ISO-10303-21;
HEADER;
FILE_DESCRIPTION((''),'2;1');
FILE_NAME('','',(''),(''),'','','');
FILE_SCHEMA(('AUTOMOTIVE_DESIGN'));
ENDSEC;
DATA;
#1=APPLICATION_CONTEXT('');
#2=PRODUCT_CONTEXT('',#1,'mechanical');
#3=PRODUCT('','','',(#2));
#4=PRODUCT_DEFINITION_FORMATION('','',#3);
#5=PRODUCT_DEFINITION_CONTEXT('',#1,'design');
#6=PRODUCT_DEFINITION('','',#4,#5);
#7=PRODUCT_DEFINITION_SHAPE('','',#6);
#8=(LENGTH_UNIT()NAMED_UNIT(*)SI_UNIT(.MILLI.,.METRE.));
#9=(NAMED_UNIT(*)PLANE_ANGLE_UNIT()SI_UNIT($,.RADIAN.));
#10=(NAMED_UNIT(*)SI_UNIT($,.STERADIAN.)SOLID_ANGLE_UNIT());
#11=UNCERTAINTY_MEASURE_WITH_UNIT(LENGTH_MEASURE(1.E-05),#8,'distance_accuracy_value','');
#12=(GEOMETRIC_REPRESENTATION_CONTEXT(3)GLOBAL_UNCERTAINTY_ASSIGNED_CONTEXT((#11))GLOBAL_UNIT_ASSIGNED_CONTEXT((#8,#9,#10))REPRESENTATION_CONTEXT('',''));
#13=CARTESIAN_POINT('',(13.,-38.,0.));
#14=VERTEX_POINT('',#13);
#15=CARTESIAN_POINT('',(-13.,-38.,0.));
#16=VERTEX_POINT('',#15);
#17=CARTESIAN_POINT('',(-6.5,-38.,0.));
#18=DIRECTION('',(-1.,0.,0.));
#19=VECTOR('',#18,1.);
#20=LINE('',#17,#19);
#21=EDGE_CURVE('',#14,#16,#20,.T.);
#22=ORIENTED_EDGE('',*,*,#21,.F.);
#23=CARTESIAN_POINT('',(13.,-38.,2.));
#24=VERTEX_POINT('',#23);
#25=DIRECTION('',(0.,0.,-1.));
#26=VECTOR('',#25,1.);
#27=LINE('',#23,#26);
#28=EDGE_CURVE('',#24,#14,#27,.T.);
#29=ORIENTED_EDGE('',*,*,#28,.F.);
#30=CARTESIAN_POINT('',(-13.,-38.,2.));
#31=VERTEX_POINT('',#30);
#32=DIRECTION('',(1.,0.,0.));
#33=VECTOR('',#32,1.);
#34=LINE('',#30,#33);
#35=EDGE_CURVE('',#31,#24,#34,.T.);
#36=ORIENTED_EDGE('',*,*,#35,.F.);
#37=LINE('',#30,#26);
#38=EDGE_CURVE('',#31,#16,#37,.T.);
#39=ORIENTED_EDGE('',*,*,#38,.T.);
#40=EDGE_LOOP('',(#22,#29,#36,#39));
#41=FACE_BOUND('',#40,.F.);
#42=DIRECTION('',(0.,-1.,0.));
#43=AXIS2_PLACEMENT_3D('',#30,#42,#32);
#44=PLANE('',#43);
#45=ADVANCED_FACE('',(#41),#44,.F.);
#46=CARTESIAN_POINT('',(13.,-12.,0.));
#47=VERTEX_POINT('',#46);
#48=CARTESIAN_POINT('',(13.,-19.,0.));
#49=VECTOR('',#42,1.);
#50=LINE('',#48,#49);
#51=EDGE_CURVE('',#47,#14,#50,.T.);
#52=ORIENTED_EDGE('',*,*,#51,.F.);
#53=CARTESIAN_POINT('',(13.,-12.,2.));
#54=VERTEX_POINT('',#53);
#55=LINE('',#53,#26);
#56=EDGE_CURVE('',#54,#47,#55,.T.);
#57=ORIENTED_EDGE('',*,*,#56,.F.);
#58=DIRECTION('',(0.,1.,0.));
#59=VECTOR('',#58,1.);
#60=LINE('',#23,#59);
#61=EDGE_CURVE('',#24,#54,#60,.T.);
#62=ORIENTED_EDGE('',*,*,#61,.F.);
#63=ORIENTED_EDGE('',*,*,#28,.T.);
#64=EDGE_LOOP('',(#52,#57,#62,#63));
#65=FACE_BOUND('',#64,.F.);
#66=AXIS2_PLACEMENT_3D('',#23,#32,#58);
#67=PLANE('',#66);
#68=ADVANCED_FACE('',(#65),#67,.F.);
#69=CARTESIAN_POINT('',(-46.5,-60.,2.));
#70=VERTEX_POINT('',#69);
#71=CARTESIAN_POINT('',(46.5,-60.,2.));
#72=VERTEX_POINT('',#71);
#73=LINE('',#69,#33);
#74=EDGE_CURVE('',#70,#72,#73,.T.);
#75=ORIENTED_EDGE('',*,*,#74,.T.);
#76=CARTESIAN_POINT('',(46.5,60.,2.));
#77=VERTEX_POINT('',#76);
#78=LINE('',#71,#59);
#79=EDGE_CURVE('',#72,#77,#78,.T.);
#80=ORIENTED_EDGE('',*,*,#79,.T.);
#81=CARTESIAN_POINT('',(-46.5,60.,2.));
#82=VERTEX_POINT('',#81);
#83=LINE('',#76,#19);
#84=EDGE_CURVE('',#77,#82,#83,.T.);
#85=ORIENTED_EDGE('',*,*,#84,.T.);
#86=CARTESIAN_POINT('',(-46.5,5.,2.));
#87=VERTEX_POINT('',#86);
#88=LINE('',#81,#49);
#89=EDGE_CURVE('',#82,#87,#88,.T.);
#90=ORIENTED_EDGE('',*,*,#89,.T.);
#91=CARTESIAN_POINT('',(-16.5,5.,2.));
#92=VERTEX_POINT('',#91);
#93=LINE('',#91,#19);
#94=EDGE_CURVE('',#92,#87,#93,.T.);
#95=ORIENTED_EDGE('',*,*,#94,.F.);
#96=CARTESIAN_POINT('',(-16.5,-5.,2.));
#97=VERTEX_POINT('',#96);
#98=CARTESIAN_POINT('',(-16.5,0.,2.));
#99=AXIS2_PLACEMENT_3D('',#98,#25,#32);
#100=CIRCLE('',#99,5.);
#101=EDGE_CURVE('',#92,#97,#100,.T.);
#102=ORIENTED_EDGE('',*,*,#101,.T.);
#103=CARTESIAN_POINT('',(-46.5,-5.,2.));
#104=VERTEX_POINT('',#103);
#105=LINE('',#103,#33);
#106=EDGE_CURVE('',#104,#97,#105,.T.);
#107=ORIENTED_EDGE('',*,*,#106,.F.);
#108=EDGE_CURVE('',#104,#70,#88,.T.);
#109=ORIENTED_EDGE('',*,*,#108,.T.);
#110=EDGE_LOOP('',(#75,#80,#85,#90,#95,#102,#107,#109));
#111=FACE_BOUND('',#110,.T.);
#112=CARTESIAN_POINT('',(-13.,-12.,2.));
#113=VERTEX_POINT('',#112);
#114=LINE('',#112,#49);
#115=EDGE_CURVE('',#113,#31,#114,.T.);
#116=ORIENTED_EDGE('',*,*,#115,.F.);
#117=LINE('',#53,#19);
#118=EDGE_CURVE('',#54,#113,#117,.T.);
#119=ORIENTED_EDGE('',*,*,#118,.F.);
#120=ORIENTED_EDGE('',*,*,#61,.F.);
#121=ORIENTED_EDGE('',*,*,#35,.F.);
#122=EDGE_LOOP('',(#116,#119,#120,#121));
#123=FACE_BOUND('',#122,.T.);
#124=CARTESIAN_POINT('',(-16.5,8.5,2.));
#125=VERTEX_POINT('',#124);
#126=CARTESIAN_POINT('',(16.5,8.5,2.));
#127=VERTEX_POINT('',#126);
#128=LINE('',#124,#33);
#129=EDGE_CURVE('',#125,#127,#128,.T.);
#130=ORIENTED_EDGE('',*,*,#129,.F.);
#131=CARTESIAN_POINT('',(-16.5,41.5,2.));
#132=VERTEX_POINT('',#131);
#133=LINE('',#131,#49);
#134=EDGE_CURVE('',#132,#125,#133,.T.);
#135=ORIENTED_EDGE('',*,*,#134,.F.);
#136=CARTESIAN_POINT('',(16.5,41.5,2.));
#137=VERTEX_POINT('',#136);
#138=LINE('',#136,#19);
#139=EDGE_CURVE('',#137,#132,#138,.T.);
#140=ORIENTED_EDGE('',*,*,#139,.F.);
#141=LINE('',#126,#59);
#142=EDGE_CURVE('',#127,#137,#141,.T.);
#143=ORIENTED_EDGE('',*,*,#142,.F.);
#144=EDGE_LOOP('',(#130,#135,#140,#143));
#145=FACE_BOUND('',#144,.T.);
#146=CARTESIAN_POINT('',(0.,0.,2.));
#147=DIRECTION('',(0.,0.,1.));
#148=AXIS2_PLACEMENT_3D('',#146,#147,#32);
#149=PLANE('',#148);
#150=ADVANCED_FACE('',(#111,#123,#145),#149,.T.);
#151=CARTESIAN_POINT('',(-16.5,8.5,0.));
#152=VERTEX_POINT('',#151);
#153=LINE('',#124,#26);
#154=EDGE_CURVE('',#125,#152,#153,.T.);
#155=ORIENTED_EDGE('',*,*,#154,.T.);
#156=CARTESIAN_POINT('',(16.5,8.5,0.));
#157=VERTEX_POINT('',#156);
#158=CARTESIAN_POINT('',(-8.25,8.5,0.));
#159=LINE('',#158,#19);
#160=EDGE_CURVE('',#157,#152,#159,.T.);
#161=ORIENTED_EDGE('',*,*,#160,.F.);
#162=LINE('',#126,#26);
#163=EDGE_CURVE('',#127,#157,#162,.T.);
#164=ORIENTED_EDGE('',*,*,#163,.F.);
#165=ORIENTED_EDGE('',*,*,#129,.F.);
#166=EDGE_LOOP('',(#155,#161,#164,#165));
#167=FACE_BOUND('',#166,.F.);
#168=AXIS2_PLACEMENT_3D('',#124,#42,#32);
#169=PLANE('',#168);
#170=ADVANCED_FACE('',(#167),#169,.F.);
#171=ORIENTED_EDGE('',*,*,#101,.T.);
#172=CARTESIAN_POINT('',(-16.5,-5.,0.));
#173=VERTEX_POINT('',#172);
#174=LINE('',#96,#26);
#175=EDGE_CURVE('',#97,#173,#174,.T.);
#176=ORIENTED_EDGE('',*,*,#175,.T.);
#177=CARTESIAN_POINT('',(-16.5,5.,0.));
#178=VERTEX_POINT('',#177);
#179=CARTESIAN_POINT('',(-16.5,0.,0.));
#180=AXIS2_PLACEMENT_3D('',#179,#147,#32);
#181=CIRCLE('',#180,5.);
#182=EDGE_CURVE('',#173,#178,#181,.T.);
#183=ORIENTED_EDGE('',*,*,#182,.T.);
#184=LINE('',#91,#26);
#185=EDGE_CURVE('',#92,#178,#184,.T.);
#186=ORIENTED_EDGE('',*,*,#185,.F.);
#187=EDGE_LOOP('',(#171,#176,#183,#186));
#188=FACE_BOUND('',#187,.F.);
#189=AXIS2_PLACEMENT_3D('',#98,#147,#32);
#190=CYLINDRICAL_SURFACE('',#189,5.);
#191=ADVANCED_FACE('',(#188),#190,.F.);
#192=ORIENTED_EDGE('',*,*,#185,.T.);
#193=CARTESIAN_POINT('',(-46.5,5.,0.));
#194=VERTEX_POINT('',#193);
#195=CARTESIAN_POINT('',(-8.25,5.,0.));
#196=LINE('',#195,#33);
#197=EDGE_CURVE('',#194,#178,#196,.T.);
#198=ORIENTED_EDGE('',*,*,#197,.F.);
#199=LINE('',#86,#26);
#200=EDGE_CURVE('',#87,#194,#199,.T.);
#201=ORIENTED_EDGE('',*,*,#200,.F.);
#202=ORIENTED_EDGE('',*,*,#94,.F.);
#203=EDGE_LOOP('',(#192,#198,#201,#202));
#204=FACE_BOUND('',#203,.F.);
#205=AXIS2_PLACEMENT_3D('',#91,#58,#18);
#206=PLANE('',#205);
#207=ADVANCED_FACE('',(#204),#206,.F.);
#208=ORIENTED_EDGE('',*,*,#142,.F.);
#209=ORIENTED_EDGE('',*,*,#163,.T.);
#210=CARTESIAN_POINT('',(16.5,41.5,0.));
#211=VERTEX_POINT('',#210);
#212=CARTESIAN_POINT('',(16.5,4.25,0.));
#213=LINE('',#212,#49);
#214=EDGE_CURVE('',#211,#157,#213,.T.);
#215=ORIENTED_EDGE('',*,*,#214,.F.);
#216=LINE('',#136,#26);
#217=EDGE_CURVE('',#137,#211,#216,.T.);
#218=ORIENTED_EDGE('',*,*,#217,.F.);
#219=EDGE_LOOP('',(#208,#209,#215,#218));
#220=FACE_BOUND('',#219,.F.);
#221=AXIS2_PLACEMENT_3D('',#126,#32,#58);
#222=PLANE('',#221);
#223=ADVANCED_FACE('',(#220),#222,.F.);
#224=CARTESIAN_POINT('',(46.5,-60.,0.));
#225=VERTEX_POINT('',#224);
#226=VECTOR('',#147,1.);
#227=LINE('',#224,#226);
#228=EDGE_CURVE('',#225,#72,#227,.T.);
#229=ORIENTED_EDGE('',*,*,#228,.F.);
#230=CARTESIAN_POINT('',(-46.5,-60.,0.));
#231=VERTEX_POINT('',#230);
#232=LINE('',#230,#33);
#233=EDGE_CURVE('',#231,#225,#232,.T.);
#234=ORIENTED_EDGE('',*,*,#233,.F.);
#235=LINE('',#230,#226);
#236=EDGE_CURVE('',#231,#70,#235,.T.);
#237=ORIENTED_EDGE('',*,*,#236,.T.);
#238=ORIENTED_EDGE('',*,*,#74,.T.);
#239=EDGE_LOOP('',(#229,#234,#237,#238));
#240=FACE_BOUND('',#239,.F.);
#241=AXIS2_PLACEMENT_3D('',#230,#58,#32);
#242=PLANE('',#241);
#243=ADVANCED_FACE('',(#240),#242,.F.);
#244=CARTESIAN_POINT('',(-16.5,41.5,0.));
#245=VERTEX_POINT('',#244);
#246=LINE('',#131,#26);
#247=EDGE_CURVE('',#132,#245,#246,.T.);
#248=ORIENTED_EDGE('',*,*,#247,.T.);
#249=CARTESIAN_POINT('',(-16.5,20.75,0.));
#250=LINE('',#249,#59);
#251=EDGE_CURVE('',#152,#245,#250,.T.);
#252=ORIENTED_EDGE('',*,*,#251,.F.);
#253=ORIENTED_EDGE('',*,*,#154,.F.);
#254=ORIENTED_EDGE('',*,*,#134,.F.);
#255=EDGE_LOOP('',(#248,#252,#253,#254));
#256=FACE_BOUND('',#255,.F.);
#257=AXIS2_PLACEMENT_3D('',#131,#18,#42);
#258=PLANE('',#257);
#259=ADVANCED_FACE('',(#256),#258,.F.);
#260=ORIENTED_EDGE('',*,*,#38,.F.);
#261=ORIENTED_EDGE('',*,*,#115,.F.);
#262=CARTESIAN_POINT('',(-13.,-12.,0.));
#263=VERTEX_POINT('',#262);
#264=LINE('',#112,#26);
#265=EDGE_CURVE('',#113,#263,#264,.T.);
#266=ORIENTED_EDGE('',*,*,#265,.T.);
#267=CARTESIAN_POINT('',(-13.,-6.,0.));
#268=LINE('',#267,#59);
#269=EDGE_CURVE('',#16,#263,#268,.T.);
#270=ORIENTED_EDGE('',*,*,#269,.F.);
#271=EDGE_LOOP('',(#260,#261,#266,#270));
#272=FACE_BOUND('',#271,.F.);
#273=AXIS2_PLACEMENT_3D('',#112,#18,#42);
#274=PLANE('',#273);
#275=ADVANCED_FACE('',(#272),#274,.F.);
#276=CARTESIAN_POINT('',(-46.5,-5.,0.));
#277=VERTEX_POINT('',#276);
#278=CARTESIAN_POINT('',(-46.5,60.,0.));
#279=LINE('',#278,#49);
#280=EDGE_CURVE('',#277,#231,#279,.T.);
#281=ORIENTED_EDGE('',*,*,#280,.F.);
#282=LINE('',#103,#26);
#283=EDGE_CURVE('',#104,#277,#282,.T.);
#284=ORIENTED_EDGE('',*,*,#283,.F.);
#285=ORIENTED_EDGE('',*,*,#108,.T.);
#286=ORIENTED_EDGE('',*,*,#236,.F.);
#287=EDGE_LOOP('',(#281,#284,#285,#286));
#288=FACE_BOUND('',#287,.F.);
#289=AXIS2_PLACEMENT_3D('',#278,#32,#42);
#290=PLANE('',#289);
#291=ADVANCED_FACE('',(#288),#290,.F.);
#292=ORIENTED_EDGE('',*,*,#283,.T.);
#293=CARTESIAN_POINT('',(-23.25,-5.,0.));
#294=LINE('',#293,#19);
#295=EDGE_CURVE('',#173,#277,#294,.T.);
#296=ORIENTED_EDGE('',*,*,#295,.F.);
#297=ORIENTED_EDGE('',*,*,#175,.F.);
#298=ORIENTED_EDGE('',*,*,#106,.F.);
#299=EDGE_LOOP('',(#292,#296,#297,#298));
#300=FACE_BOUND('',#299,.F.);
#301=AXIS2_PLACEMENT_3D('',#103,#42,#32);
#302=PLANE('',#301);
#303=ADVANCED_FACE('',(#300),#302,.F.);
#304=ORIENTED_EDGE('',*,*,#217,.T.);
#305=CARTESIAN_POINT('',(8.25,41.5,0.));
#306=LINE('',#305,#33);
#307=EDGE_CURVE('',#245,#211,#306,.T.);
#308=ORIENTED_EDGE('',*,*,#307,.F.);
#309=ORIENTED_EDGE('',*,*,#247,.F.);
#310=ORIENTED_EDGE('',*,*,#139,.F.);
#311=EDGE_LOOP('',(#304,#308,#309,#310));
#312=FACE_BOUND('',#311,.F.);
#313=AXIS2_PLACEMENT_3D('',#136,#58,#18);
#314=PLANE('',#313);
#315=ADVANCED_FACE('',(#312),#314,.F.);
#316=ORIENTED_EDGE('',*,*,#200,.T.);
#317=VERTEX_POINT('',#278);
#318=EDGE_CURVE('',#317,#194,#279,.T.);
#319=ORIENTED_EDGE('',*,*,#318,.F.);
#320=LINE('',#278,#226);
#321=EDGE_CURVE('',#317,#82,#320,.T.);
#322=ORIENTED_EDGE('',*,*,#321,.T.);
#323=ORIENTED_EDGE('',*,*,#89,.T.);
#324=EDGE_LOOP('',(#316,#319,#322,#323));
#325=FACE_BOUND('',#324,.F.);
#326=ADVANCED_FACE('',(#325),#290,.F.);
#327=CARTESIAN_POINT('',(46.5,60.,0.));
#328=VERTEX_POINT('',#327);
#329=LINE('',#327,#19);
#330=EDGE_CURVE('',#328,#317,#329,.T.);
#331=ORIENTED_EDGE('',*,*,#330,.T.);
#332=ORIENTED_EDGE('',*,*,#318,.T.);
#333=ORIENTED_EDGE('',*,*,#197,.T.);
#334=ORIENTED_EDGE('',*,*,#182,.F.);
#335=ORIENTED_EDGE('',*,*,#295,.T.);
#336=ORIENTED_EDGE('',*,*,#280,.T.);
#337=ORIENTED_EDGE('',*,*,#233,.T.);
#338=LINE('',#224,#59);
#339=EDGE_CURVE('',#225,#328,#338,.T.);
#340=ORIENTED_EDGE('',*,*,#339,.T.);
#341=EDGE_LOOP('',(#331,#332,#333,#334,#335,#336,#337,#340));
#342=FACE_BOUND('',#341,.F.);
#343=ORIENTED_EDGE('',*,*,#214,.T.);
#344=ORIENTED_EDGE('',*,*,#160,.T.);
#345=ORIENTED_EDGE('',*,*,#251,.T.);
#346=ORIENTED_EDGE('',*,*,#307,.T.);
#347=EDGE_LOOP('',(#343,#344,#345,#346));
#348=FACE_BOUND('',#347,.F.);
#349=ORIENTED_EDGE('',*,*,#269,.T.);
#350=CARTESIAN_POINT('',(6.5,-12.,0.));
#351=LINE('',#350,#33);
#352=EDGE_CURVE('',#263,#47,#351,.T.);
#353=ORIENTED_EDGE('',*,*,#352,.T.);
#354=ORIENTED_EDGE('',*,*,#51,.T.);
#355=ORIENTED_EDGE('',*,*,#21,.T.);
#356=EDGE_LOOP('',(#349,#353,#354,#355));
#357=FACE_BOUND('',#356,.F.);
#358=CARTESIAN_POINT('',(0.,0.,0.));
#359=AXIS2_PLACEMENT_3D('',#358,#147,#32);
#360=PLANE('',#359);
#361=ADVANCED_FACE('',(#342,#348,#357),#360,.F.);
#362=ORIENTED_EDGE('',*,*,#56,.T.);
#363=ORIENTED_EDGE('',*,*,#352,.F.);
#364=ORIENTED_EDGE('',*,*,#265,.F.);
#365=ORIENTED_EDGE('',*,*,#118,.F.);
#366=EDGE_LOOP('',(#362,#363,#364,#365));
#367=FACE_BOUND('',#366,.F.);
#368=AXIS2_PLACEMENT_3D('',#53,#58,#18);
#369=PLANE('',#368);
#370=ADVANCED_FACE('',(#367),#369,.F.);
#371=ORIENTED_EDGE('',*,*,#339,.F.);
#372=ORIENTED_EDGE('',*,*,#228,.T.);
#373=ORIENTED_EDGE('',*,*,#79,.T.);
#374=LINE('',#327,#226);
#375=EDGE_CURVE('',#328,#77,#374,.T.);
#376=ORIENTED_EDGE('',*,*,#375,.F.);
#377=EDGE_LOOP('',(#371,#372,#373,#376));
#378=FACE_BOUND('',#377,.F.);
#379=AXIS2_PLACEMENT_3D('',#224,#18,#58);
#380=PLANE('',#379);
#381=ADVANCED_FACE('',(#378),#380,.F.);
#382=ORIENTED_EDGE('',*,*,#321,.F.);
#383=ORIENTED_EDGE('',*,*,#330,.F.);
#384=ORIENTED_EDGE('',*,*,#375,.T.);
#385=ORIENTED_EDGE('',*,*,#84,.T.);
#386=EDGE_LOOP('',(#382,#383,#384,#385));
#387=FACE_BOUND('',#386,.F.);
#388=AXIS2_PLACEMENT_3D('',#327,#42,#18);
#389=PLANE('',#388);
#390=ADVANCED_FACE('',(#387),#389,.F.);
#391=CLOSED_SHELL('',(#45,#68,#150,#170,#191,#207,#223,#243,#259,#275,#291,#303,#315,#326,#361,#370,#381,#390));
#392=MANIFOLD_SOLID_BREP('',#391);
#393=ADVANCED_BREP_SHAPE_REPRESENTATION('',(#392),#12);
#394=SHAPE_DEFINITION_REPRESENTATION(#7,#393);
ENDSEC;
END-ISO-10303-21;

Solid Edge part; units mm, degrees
sketch "Sketch1" plane through (0, 0, 0) normal (0, 0, 1) x (1, 0, 0)
  line L0 (-46.5, -60) -> (46.5, -60)
  line L1 (46.5, -60) -> (46.5, 60)
  line L2 (46.5, 60) -> (-46.5, 60)
  line L3 (-46.5, 60) -> (-46.5, -60)
extrude "Protrusion1" add sketch "Sketch1" along normal blind 2
sketch "Sketch2" plane through (0, 0, 2) normal (0, 0, 1) x (1, 0, 0)
  arc A0 (-16.5, 5) -> (-16.5, -5) centre (-16.5, 0) cw
  line L0 (-16.5, 5) -> (-46.5, 5)
  line L1 (-46.5, 5) -> (-46.5, -5)
  line L2 (-46.5, -5) -> (-16.5, -5)
  line L3 (-16.5, 8.5) -> (16.5, 8.5)
  line L4 (16.5, 8.5) -> (16.5, 41.5)
  line L5 (16.5, 41.5) -> (-16.5, 41.5)
  line L6 (-16.5, 41.5) -> (-16.5, 8.5)
  line L7 (13, -12) -> (-13, -12)
  line L8 (-13, -12) -> (-13, -38)
  line L9 (-13, -38) -> (13, -38)
  line L10 (13, -38) -> (13, -12)
extrude "Cutout1" cut sketch "Sketch2" against normal up to next
